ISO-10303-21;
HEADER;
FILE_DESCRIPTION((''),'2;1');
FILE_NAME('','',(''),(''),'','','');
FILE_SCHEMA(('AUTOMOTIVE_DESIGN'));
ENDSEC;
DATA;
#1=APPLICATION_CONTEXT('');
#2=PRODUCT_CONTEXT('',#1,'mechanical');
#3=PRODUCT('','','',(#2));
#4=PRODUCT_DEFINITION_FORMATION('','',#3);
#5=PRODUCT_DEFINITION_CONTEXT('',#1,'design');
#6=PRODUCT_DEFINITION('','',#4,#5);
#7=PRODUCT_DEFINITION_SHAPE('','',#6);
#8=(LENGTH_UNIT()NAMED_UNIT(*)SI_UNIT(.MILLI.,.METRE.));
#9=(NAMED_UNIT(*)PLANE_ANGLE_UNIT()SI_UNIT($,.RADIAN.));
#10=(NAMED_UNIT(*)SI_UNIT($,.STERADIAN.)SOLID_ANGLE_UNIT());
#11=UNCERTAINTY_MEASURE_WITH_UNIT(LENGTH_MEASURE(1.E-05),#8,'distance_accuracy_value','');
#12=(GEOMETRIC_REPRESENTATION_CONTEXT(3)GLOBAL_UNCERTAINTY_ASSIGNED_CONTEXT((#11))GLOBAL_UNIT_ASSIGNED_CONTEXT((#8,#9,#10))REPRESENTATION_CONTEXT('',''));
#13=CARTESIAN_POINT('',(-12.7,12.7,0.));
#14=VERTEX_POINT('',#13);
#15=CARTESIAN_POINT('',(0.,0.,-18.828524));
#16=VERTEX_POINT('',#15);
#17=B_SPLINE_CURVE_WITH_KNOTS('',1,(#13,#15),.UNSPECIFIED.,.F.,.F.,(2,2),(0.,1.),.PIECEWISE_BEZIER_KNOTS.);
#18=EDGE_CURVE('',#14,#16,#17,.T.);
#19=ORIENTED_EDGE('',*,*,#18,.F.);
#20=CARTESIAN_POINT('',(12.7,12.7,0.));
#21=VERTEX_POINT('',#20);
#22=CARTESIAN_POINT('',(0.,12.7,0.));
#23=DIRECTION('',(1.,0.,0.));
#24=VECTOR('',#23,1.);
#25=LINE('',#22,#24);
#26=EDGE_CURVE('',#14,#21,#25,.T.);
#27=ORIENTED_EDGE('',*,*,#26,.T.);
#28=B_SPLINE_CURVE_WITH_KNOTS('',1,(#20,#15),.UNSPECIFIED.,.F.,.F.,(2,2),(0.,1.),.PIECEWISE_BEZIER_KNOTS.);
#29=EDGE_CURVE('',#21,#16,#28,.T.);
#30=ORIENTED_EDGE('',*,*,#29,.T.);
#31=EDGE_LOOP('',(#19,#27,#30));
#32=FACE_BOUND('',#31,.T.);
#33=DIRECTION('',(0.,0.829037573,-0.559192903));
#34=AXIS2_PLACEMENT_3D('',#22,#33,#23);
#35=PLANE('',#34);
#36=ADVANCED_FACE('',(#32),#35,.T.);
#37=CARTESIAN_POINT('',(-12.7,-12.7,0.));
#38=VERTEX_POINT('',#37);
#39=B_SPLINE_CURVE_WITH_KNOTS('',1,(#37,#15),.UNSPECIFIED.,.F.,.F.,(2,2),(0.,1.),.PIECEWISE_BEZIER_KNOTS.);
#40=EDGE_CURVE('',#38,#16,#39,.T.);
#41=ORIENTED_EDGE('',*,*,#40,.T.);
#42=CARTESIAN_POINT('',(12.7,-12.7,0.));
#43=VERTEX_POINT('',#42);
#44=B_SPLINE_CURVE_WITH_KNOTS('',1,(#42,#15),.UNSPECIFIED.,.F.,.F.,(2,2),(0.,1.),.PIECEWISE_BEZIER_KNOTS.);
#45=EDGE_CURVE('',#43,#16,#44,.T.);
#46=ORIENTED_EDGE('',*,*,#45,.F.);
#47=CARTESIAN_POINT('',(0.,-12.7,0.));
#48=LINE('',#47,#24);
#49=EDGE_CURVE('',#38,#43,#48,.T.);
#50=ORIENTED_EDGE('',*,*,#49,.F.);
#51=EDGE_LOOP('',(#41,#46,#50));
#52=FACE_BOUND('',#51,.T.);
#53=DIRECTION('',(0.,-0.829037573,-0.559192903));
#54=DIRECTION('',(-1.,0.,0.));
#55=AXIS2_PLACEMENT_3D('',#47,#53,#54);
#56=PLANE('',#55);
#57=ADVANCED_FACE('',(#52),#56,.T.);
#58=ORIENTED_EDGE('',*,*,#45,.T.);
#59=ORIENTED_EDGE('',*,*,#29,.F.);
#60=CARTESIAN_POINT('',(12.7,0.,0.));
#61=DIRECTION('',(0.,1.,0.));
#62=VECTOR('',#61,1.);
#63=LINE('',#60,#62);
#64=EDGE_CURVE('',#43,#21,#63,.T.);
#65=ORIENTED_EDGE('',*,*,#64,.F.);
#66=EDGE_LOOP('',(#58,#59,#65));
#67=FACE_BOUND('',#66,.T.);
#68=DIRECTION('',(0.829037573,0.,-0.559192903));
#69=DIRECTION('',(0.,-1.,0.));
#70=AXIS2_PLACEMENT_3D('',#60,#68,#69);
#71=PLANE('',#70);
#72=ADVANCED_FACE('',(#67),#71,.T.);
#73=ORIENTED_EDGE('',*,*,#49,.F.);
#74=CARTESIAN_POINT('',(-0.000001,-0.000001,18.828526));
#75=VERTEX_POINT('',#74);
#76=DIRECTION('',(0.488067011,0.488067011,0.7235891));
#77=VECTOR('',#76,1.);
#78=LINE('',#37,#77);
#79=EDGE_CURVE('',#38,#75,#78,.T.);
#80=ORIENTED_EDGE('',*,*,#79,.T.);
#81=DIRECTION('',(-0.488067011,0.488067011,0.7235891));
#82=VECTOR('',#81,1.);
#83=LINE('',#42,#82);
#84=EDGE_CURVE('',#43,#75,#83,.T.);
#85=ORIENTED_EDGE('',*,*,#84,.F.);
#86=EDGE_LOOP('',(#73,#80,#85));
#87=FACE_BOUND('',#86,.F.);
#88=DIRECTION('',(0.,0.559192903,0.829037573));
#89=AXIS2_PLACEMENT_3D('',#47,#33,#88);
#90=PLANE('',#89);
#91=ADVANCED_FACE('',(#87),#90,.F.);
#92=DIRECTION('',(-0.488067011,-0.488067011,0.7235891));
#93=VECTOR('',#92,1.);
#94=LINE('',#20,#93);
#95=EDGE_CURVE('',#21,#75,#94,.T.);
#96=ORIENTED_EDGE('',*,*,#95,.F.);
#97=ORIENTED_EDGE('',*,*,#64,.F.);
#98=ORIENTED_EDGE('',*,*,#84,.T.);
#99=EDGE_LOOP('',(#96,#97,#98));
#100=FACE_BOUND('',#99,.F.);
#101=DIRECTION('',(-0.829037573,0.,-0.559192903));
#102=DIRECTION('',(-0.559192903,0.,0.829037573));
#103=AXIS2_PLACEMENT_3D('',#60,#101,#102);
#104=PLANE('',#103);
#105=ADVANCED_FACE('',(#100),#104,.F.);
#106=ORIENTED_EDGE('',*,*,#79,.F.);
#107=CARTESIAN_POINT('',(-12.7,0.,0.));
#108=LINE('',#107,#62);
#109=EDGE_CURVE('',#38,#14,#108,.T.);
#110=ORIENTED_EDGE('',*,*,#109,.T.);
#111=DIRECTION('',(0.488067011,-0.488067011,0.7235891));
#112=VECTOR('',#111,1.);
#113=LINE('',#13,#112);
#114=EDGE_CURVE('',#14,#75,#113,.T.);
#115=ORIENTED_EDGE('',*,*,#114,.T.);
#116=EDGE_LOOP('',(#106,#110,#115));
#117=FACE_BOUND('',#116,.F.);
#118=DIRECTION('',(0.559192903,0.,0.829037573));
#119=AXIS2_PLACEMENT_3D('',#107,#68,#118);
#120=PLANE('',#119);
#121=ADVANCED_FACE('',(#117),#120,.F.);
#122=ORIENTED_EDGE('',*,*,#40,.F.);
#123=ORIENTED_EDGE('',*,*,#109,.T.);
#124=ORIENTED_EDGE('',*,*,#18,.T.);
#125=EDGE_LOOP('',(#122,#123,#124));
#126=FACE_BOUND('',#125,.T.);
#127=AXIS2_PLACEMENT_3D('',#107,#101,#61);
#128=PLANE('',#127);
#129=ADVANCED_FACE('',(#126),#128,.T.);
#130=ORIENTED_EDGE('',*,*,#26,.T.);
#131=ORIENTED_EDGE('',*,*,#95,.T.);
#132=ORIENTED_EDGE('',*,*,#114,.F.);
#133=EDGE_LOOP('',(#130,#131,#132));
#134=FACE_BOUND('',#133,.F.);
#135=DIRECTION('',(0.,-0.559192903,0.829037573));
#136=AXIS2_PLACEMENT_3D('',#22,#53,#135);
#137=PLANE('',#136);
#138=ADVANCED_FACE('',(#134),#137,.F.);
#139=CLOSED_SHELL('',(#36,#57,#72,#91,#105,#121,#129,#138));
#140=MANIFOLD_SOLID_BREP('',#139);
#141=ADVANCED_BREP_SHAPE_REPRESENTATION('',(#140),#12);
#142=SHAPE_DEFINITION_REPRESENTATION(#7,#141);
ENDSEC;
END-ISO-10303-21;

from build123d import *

# Parameters (mm, degrees)
F0_W      = 25.4
F0_H      = 25.4
F1_DEPTH  = 29.464
F1_TAPER  = 34
F1_FACE_W = 25.4
F1_FACE_H = 25.4


# Not quite as in the source:
# - an extrude whose draft closes it to a point is written as a loft to that point


with BuildPart() as f1:
    # F0 (on Top) → F1 (new body)
    with BuildSketch(Plane.XY):
        Rectangle(F0_W, F0_H)
    extrude(amount=F1_DEPTH, taper=F1_TAPER)

    # F1_face (on face) → F2 section 0
    with BuildSketch(Plane(origin=(0, 0, 0), x_dir=(1, 0, 0), z_dir=(0, 0, -1)), mode=Mode.PRIVATE) as f2_s0:
        Rectangle(F1_FACE_W, F1_FACE_H)
    loft([f2_s0.sketch, Vertex(0, 0, -18.8285243001)], ruled=True)


solid = f1.part
